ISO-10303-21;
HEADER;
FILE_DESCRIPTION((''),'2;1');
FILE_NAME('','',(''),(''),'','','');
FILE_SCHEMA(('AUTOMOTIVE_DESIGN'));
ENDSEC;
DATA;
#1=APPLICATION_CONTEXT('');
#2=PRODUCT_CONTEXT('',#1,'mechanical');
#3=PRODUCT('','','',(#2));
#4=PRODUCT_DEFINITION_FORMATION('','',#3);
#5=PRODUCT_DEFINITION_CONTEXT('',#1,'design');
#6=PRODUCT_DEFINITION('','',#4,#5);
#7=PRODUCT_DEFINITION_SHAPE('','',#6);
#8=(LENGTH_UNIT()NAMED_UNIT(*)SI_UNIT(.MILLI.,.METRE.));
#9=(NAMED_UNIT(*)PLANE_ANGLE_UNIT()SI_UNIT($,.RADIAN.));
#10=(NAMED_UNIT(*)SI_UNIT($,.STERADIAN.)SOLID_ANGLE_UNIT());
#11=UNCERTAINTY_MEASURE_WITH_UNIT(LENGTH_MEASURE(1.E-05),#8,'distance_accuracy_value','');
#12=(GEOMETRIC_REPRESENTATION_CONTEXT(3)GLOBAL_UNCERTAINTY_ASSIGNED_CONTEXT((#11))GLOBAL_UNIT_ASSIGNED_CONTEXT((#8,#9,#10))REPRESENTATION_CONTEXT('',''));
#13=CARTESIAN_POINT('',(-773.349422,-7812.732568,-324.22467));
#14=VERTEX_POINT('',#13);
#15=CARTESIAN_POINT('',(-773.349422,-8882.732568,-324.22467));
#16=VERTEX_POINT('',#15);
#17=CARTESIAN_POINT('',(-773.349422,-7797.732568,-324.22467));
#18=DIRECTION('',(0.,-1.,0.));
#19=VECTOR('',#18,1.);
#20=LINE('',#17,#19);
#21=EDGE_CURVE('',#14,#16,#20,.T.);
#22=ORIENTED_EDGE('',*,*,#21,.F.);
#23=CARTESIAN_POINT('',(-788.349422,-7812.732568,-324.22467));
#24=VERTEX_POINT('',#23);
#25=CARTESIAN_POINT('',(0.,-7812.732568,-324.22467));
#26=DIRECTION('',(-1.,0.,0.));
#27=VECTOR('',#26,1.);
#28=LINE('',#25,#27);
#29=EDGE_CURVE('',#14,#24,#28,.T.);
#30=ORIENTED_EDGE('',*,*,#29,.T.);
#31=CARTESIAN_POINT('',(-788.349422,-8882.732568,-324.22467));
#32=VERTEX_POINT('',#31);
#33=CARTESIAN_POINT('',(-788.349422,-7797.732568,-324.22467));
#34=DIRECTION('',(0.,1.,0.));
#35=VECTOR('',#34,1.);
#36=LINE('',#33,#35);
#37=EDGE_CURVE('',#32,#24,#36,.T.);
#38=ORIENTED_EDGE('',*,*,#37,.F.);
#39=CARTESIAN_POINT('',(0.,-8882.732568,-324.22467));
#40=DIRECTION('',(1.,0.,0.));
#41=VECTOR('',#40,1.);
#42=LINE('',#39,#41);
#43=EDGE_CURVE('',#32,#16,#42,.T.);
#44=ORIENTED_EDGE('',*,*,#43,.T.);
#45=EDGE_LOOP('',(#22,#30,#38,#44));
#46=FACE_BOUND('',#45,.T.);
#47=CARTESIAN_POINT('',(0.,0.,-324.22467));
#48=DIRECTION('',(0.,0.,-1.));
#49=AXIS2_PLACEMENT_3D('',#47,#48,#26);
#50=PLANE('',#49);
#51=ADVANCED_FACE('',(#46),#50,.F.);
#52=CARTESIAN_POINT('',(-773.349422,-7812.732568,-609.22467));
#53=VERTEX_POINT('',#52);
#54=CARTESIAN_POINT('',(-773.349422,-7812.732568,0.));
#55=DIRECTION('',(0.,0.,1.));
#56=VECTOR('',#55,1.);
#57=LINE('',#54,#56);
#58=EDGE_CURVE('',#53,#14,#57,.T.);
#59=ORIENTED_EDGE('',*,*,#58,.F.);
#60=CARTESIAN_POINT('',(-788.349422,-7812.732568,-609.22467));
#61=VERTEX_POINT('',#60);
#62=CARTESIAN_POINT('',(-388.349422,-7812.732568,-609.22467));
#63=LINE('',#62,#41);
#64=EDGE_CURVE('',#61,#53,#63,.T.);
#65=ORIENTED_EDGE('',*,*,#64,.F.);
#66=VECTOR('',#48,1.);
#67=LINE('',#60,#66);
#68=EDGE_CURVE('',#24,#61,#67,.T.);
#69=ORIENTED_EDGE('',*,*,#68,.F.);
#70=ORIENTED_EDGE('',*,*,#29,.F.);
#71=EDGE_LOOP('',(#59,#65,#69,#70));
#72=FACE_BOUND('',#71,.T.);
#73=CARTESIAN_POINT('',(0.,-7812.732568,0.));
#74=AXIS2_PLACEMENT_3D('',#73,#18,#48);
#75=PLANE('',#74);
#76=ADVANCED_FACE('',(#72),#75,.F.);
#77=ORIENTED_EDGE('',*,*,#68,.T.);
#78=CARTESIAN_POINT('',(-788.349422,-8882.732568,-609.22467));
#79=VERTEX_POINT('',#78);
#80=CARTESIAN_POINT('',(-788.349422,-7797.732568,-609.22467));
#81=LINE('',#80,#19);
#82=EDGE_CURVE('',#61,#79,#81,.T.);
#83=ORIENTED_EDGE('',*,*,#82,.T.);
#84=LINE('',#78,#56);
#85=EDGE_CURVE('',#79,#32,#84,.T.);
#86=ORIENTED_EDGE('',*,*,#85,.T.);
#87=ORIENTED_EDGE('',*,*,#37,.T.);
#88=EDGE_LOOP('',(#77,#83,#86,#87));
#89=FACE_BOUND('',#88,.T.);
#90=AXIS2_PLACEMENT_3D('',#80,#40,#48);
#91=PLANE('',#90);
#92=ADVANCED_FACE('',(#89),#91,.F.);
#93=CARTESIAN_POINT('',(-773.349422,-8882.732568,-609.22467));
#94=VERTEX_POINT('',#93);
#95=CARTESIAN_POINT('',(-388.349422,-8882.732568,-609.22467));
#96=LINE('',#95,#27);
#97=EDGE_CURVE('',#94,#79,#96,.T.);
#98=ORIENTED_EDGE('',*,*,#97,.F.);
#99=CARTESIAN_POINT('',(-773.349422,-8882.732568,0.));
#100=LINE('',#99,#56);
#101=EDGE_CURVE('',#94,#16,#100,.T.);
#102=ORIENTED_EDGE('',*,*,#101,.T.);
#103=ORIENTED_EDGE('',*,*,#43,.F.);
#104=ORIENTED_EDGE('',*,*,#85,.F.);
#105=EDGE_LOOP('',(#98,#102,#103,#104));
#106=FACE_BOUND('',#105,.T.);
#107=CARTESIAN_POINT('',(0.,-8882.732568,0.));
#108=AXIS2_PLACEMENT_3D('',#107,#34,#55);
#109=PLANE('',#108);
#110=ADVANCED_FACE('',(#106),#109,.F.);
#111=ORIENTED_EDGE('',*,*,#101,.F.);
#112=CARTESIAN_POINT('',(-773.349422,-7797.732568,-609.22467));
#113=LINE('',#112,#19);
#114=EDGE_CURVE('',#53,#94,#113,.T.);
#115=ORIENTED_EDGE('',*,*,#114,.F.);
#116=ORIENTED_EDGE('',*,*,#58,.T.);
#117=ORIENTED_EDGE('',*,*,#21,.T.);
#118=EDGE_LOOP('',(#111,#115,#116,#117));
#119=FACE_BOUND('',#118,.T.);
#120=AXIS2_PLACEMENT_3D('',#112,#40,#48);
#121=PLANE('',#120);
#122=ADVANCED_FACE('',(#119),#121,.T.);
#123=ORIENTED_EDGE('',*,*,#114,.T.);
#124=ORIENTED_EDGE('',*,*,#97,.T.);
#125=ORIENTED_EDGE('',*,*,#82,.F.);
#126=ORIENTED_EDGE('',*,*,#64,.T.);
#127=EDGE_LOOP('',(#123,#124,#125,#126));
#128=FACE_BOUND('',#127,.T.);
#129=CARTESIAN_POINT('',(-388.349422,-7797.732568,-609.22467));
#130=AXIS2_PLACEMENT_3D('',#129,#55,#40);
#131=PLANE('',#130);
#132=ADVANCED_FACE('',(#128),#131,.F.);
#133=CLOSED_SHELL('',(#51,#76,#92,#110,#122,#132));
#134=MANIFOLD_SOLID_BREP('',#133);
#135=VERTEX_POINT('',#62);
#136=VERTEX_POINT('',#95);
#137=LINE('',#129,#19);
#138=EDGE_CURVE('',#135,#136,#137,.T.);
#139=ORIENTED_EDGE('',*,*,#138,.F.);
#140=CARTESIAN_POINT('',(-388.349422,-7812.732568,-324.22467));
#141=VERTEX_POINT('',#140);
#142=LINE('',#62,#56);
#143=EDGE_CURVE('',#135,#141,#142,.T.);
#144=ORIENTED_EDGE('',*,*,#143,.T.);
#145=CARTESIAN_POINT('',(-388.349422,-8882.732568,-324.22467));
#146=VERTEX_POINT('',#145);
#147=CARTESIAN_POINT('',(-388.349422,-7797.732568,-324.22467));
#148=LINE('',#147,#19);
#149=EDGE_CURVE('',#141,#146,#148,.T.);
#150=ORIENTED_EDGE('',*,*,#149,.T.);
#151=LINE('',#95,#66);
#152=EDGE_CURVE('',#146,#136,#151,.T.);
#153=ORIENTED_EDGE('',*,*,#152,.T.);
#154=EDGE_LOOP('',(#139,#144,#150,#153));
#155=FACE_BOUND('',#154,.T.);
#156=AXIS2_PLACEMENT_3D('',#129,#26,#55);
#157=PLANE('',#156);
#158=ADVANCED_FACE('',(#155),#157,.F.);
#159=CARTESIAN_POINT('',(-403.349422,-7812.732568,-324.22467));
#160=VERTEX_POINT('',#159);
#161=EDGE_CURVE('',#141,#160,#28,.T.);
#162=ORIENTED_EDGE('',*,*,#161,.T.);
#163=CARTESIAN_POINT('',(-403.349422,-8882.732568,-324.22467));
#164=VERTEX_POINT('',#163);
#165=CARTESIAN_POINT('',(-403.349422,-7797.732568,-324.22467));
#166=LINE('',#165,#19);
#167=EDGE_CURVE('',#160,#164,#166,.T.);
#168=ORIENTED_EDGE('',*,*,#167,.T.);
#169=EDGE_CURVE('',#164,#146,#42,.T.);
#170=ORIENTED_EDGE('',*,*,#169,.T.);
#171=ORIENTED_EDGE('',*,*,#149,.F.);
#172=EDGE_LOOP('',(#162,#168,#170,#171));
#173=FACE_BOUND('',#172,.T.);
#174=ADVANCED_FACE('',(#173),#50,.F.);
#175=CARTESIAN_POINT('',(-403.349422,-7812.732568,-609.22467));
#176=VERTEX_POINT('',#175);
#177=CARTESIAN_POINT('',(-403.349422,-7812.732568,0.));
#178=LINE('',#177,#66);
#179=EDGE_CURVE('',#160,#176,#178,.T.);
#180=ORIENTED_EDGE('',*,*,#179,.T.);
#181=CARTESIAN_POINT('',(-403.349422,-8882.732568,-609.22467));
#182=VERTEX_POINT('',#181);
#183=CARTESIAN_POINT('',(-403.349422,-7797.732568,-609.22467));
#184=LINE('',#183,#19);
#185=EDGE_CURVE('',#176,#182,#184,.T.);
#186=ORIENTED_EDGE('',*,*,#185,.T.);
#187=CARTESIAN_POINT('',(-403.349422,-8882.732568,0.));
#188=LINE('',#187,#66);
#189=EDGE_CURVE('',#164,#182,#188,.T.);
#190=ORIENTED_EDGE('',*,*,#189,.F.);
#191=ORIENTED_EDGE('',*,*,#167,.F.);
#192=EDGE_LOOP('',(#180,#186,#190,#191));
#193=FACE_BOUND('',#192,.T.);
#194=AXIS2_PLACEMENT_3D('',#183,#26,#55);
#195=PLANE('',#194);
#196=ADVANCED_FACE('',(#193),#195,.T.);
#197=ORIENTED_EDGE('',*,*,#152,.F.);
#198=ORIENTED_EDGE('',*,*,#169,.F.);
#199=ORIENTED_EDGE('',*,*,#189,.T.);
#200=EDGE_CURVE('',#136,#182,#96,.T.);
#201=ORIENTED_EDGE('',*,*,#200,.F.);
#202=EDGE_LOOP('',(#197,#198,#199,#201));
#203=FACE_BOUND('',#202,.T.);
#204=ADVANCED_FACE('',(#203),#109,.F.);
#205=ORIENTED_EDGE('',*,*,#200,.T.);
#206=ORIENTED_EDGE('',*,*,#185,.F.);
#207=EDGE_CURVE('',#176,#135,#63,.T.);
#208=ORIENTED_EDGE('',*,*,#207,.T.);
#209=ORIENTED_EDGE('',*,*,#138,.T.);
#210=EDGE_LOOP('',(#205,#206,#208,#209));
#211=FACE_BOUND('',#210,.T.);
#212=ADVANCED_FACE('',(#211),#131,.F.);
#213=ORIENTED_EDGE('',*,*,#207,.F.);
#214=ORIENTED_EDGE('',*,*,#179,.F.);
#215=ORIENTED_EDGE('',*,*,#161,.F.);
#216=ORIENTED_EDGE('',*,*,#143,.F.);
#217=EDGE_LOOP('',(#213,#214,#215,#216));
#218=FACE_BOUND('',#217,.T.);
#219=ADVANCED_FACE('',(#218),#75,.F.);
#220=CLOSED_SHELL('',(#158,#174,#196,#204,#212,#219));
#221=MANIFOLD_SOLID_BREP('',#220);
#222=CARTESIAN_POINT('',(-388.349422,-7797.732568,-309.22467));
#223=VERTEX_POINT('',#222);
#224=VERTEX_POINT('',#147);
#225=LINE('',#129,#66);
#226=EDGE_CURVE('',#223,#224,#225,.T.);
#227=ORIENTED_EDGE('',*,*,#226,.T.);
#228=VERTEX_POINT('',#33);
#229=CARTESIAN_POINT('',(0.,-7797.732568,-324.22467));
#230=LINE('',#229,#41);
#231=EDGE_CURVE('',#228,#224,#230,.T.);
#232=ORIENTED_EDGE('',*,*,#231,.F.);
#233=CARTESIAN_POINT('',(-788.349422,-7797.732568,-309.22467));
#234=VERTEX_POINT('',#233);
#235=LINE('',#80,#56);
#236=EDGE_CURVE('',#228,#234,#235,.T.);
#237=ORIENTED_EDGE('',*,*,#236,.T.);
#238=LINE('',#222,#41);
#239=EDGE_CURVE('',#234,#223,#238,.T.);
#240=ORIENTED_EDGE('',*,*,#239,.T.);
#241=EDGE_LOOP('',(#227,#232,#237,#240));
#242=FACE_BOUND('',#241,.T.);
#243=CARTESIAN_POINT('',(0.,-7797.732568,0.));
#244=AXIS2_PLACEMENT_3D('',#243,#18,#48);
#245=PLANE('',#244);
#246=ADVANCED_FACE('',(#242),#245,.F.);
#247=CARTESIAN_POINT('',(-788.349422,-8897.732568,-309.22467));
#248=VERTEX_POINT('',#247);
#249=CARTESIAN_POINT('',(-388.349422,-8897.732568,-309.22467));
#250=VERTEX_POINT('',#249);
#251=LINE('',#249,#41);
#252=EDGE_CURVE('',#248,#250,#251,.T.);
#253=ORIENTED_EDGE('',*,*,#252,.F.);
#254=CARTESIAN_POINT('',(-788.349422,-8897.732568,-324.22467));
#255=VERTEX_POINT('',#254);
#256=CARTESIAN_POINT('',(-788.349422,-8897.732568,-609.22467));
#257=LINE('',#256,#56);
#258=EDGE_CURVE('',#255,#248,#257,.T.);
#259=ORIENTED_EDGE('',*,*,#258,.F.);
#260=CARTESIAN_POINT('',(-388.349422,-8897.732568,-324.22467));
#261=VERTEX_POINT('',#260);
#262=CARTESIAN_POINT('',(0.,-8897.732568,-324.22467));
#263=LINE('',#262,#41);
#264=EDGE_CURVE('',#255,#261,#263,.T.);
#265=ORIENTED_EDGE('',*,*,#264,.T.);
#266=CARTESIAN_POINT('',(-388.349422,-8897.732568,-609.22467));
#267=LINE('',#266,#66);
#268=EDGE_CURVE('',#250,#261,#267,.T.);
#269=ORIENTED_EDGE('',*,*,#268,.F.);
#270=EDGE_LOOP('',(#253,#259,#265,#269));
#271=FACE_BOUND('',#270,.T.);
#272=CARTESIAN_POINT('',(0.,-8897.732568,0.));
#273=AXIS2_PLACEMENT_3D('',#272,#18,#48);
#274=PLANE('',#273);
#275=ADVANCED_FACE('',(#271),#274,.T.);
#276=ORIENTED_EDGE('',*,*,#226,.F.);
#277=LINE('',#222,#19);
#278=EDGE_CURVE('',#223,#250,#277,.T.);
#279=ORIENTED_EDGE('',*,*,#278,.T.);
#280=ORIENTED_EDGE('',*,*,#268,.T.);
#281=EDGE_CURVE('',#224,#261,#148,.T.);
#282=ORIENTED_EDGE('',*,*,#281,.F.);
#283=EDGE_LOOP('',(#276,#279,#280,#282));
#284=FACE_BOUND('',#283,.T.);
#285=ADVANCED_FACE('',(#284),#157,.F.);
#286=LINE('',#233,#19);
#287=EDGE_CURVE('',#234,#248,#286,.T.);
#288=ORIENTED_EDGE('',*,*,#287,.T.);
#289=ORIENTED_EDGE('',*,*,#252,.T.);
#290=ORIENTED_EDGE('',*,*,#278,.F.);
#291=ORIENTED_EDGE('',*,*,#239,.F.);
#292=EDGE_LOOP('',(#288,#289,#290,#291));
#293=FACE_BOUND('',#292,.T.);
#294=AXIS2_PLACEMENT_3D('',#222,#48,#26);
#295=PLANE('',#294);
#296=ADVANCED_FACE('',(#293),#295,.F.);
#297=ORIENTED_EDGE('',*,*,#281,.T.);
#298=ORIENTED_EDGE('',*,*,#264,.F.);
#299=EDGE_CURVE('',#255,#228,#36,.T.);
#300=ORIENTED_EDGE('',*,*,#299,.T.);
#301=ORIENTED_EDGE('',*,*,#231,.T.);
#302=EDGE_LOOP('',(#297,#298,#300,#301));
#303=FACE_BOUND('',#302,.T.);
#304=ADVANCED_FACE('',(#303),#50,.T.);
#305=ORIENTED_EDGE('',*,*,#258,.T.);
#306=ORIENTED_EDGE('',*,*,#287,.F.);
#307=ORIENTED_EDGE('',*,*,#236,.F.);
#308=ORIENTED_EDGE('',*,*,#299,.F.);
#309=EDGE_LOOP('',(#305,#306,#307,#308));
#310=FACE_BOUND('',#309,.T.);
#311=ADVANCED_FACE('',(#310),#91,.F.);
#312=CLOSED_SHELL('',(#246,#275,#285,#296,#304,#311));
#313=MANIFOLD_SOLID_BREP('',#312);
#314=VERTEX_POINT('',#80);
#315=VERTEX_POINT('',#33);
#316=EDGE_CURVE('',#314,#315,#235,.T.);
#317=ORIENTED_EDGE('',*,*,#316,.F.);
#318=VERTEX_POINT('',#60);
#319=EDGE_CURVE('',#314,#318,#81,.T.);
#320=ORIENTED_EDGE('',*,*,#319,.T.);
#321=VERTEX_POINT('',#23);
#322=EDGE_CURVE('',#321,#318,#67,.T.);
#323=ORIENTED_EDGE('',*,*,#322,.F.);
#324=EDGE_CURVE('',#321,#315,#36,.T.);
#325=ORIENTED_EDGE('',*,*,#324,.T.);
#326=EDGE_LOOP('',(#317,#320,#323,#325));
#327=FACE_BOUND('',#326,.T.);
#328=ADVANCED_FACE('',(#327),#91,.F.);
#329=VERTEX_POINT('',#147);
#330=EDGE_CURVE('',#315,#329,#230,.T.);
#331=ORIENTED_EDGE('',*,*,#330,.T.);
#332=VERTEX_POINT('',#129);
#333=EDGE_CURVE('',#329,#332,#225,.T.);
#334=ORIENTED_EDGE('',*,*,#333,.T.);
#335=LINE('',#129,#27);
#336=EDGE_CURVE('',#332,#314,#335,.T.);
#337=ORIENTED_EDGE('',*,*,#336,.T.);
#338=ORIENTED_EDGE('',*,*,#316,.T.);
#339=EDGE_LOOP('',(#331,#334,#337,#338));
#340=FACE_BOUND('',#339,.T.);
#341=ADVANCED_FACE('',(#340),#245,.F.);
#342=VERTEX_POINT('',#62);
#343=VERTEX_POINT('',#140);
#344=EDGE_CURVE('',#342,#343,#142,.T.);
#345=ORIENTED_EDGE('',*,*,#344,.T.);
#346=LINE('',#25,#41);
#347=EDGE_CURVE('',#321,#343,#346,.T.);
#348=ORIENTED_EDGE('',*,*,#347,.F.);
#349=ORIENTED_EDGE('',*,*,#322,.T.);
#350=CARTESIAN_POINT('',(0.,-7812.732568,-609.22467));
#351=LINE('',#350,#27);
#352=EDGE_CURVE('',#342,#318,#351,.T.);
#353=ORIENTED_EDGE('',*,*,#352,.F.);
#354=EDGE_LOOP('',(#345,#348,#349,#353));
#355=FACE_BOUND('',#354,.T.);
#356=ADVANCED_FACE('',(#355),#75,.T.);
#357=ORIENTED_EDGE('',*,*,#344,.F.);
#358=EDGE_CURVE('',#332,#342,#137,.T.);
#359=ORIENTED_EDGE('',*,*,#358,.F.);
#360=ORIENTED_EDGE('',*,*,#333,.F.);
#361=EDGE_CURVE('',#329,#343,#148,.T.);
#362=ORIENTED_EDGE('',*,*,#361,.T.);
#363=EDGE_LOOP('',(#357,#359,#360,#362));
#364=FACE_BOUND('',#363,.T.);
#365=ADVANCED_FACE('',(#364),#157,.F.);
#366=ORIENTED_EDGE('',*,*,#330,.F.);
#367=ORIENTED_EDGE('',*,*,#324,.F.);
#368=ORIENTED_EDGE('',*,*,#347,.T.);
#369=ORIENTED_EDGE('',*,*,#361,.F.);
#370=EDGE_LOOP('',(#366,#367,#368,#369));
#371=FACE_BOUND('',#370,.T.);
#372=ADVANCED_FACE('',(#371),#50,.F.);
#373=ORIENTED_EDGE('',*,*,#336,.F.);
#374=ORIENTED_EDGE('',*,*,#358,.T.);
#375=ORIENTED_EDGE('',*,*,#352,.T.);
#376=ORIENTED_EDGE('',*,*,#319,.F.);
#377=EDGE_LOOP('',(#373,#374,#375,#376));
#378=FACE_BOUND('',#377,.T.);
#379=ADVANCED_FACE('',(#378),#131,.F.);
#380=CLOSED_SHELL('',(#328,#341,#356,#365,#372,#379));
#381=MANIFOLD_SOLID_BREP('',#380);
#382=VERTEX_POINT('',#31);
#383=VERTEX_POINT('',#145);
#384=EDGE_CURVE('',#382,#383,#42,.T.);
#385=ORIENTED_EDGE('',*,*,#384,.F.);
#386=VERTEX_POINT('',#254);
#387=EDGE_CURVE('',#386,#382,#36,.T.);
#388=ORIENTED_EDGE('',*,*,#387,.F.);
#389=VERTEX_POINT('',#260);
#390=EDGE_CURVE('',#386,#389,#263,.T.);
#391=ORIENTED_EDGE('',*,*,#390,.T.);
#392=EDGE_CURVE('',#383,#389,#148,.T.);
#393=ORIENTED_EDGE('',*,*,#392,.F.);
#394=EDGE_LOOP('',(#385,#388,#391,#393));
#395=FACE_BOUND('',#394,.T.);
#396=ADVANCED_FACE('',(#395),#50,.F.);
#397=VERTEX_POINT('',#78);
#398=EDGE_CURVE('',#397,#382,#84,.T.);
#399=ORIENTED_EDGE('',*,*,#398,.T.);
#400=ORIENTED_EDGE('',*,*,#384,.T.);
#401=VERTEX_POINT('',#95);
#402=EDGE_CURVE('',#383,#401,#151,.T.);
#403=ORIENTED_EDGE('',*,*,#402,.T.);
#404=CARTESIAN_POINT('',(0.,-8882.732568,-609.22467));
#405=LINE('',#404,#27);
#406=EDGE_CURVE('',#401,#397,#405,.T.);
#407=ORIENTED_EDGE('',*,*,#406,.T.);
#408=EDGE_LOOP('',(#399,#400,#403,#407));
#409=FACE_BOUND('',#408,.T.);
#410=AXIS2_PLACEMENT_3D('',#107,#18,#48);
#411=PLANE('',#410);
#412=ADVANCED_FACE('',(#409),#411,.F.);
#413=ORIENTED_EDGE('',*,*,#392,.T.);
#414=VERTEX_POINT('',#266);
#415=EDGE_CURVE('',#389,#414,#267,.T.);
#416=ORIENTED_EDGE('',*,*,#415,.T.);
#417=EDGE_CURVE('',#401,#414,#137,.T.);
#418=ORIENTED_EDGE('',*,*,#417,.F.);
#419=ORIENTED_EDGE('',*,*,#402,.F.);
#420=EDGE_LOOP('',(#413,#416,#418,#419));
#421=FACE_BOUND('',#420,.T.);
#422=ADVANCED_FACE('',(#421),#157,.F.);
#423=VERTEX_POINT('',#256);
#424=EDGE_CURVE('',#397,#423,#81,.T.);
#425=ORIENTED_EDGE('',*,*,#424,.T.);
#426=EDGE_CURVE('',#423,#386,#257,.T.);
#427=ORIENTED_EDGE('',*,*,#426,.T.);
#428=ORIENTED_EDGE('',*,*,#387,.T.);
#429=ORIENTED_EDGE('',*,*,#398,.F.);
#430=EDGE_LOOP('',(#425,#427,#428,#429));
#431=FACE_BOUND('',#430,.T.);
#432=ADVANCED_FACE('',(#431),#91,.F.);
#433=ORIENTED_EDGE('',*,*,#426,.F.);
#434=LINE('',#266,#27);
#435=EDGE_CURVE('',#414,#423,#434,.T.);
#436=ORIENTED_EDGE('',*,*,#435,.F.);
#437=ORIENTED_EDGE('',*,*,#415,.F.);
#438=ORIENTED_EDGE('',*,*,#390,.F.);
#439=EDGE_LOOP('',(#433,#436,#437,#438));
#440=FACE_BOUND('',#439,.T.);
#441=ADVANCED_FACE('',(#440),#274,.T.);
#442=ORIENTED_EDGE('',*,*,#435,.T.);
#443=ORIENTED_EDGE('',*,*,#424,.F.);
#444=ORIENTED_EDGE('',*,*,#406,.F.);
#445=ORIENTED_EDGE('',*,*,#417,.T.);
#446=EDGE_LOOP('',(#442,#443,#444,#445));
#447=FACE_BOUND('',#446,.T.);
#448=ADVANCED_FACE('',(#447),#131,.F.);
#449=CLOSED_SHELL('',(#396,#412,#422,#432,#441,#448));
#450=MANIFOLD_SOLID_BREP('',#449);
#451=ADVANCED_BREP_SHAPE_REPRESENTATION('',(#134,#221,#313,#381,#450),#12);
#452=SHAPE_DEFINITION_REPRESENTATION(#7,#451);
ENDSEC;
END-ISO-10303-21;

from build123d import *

# Parameters (mm, degrees)
SKETCH1_W           = 400
SKETCH1_H           = 300
BOSS_EXTRUDE1_DEPTH = 1100
SHELL1_T            = -15
SPLIT2_START        = -7812.732568069
SPLIT2_OUTLINE_W    = 400
SPLIT2_OUTLINE_H    = 285
SPLIT2_DEPTH        = 15
SPLIT2_START_2      = -8897.732568069
SPLIT2_2_OUTLINE_W  = 15
SPLIT2_2_OUTLINE_H  = 285
SPLIT2_2_DEPTH      = 1100
SPLIT2_3_OUTLINE_W  = 385
SPLIT2_3_OUTLINE_H  = 285
SPLIT2_3_DEPTH      = 15
SPLIT2_4_OUTLINE_W  = 385
SPLIT2_4_OUTLINE_H  = 285
SPLIT2_4_DEPTH      = 15
SPLIT2_START_3      = -8882.732568069
SPLIT2_5_OUTLINE_W  = 15
SPLIT2_5_OUTLINE_H  = 285
SPLIT2_5_DEPTH      = 1070
SPLIT2_6_OUTLINE_W  = 400
SPLIT2_6_OUTLINE_H  = 285
SPLIT2_6_DEPTH      = 15


# Read off the part's stored shape, not the designer's step: Split2
with BuildPart() as part:
    # Sketch1 → Boss-Extrude1 (new body)
    with BuildSketch(Plane(origin=(0, -8897.732568069, 0), x_dir=(1, 0, 0), z_dir=(0, 1, 0))):
        with Locations((-588.349422114, 459.224669701)):
            Rectangle(SKETCH1_W, SKETCH1_H)
    extrude(amount=BOSS_EXTRUDE1_DEPTH)

    # Shell1
    shell1_openings = [part.faces().sort_by_distance(p)[0] for p in [
        (-588.349422114, -8347.732568069, -609.224669701),
    ]]
    offset(amount=SHELL1_T, openings=shell1_openings, kind=Kind.INTERSECTION)


with BuildPart() as body_2:
    # Split1: the piece on the far side of the plane
    add(part.part)
    split(bisect_by=Plane(origin=(0, 0, -324.224669701), x_dir=(-1, 0, 0), z_dir=(0, 0, -1)), keep=Keep.BOTTOM)


with BuildPart() as part_1:
    add(part.part)

    # Split1
    split(bisect_by=Plane(origin=(0, 0, -324.224669701), x_dir=(-1, 0, 0), z_dir=(0, 0, -1)), keep=Keep.TOP)

    # Split2 2 outline → Split2 2 (cut)
    with BuildSketch(Plane(origin=(0, 0, 0), x_dir=(1, 0, 0), z_dir=(0, 1, 0)).offset(SPLIT2_START_2)):
        with Locations((-780.849422114, 466.724669701)):
            Rectangle(SPLIT2_2_OUTLINE_W, SPLIT2_2_OUTLINE_H)
    extrude(amount=SPLIT2_2_DEPTH, mode=Mode.SUBTRACT)

    # Split2 3 outline → Split2 3 (cut)
    with BuildSketch(Plane(origin=(0, 0, 0), x_dir=(1, 0, 0), z_dir=(0, 1, 0)).offset(SPLIT2_START_2)):
        with Locations((-580.849422114, 466.724669701)):
            Rectangle(SPLIT2_3_OUTLINE_W, SPLIT2_3_OUTLINE_H)
    extrude(amount=SPLIT2_3_DEPTH, mode=Mode.SUBTRACT)

    # Split2 4 outline → Split2 4 (cut)
    with BuildSketch(Plane(origin=(0, 0, 0), x_dir=(1, 0, 0), z_dir=(0, 1, 0)).offset(SPLIT2_START)):
        with Locations((-580.849422114, 466.724669701)):
            Rectangle(SPLIT2_4_OUTLINE_W, SPLIT2_4_OUTLINE_H)
    extrude(amount=SPLIT2_4_DEPTH, mode=Mode.SUBTRACT)


with BuildPart() as body_3:
    # Split2 outline → Split2 (new body)
    with BuildSketch(Plane(origin=(0, 0, 0), x_dir=(1, 0, 0), z_dir=(0, 1, 0)).offset(SPLIT2_START)):
        with Locations((-588.349422114, 466.724669701)):
            Rectangle(SPLIT2_OUTLINE_W, SPLIT2_OUTLINE_H)
    extrude(amount=SPLIT2_DEPTH)


with BuildPart() as body_4:
    # Split2 5 outline → Split2 5 (new body)
    with BuildSketch(Plane(origin=(0, 0, 0), x_dir=(1, 0, 0), z_dir=(0, 1, 0)).offset(SPLIT2_START_3)):
        with Locations((-780.849422114, 466.724669701)):
            Rectangle(SPLIT2_5_OUTLINE_W, SPLIT2_5_OUTLINE_H)
    extrude(amount=SPLIT2_5_DEPTH)


with BuildPart() as body_5:
    # Split2 6 outline → Split2 6 (new body)
    with BuildSketch(Plane(origin=(0, 0, 0), x_dir=(1, 0, 0), z_dir=(0, 1, 0)).offset(SPLIT2_START_2)):
        with Locations((-588.349422114, 466.724669701)):
            Rectangle(SPLIT2_6_OUTLINE_W, SPLIT2_6_OUTLINE_H)
    extrude(amount=SPLIT2_6_DEPTH)


solid = Compound([body_2.part, part_1.part, body_3.part, body_4.part, body_5.part])
